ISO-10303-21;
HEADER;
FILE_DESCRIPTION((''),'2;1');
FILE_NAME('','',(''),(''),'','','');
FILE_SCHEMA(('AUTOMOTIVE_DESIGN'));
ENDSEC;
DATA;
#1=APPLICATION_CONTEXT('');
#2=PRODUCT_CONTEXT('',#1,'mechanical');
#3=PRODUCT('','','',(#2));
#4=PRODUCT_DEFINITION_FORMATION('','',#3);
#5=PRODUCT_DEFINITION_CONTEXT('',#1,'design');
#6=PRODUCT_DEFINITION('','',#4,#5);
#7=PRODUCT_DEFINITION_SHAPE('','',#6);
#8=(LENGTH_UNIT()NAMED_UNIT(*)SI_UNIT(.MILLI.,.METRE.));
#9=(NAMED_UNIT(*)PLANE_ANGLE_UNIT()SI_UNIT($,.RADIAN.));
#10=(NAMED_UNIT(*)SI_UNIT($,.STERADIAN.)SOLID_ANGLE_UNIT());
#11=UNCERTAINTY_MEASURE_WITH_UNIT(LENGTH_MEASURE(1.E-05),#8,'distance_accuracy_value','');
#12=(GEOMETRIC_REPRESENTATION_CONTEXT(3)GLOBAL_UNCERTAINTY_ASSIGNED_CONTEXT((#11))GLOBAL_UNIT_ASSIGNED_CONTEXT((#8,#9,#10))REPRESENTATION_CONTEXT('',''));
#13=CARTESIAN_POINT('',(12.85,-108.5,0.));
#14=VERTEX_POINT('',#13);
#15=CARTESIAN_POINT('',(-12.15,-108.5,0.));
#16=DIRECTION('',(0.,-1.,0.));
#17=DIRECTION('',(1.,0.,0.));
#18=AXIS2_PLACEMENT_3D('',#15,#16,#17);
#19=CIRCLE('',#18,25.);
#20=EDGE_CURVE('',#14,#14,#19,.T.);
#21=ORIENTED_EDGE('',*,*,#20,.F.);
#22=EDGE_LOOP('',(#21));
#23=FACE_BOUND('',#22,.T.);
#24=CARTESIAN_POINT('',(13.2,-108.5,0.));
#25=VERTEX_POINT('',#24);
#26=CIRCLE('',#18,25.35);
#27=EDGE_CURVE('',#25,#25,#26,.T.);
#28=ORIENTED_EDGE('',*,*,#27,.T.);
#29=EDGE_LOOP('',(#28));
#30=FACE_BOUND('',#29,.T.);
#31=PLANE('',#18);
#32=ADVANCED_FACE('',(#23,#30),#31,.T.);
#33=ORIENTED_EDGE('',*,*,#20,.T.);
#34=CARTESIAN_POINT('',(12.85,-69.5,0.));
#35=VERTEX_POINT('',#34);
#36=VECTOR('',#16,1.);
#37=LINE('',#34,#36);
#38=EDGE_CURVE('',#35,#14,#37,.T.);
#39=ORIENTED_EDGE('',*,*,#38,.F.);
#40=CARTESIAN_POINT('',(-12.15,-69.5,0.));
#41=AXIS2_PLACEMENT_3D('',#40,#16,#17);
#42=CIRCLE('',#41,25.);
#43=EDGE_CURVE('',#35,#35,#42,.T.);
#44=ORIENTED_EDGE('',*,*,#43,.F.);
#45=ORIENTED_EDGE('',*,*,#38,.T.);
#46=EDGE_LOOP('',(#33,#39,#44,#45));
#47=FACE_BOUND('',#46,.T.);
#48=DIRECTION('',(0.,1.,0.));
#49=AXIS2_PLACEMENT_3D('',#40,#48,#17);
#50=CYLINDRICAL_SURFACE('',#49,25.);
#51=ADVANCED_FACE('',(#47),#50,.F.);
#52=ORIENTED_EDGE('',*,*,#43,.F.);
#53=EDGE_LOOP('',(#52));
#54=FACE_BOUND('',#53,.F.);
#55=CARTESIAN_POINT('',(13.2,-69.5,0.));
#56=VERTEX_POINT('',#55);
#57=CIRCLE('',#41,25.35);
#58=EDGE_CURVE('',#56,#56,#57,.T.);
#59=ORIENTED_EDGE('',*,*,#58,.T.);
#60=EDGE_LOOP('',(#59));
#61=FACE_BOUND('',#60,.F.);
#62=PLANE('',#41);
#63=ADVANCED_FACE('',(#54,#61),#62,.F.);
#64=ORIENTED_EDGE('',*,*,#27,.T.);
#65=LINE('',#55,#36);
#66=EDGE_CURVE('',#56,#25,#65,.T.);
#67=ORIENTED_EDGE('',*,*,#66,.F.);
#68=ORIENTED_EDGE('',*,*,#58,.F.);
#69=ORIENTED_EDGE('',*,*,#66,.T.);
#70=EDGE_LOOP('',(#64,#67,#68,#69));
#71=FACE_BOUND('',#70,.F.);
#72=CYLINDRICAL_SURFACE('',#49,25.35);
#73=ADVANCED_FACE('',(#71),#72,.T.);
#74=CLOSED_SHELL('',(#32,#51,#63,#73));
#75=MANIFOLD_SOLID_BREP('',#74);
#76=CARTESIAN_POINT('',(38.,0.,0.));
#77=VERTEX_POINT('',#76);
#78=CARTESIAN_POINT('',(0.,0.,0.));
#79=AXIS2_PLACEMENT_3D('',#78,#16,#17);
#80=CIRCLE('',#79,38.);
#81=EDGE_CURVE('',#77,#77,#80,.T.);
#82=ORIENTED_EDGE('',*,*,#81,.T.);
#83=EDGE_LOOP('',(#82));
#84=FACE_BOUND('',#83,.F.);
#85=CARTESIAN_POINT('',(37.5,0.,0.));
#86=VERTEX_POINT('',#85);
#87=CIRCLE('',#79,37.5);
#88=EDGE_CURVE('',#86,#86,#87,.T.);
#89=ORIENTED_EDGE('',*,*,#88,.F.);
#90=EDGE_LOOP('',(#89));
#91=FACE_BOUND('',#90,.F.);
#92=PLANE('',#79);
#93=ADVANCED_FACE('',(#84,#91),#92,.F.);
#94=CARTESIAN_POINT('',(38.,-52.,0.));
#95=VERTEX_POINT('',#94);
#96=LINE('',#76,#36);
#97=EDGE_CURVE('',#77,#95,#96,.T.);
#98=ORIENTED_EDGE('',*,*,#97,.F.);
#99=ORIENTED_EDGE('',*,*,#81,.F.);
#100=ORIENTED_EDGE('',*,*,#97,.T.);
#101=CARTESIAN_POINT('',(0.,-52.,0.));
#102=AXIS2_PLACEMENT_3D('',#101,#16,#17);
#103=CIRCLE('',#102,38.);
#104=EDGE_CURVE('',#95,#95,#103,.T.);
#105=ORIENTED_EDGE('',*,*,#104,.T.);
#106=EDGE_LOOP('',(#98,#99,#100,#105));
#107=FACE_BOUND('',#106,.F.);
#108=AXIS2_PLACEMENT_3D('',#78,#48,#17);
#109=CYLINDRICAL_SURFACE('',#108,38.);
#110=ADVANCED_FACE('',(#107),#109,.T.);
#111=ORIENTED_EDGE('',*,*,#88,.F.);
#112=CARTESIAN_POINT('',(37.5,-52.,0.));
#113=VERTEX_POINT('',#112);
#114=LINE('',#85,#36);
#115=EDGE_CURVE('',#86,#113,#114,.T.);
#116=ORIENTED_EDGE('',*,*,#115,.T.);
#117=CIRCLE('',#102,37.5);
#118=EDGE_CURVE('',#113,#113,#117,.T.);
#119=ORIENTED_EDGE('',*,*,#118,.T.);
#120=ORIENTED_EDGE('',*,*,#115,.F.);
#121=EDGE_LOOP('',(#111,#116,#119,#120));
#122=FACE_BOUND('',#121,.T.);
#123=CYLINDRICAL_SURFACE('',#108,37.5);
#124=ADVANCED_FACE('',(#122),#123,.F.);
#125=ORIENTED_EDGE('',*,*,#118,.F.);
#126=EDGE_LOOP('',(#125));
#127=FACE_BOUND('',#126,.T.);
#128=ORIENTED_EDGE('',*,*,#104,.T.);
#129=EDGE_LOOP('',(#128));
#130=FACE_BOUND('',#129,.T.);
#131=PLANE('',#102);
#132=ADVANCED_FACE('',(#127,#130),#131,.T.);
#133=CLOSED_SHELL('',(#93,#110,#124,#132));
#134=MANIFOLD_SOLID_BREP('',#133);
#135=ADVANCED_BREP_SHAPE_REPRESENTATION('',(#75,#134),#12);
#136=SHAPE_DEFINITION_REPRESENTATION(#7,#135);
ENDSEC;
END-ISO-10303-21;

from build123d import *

# Parameters (mm, degrees)
F0_R     = 38
F0_R_2   = 37.5
F1_DEPTH = 52
F3_R     = 25.35
F3_R_2   = 25
F4_DEPTH = 39


# Not quite as in the source:
# - the program builds the solid bodies; features that only make, move or delete a surface that nothing else refers to are left out


with BuildPart() as f1:
    # F0 (on Front) → F1 (new body)
    with BuildSketch(Plane.XZ):
        Circle(F0_R)
        Circle(F0_R_2, mode=Mode.SUBTRACT)
    extrude(amount=F1_DEPTH)


with BuildPart() as f4:
    # F3 (on offset) → F4 (new body)
    with BuildSketch(Plane.XZ.offset(69.5)):
        with Locations((-12.15, 0)):
            Circle(F3_R)
        with Locations((-12.15, 0)):
            Circle(F3_R_2, mode=Mode.SUBTRACT)
    extrude(amount=F4_DEPTH)


solid = Compound([f1.part, f4.part])
